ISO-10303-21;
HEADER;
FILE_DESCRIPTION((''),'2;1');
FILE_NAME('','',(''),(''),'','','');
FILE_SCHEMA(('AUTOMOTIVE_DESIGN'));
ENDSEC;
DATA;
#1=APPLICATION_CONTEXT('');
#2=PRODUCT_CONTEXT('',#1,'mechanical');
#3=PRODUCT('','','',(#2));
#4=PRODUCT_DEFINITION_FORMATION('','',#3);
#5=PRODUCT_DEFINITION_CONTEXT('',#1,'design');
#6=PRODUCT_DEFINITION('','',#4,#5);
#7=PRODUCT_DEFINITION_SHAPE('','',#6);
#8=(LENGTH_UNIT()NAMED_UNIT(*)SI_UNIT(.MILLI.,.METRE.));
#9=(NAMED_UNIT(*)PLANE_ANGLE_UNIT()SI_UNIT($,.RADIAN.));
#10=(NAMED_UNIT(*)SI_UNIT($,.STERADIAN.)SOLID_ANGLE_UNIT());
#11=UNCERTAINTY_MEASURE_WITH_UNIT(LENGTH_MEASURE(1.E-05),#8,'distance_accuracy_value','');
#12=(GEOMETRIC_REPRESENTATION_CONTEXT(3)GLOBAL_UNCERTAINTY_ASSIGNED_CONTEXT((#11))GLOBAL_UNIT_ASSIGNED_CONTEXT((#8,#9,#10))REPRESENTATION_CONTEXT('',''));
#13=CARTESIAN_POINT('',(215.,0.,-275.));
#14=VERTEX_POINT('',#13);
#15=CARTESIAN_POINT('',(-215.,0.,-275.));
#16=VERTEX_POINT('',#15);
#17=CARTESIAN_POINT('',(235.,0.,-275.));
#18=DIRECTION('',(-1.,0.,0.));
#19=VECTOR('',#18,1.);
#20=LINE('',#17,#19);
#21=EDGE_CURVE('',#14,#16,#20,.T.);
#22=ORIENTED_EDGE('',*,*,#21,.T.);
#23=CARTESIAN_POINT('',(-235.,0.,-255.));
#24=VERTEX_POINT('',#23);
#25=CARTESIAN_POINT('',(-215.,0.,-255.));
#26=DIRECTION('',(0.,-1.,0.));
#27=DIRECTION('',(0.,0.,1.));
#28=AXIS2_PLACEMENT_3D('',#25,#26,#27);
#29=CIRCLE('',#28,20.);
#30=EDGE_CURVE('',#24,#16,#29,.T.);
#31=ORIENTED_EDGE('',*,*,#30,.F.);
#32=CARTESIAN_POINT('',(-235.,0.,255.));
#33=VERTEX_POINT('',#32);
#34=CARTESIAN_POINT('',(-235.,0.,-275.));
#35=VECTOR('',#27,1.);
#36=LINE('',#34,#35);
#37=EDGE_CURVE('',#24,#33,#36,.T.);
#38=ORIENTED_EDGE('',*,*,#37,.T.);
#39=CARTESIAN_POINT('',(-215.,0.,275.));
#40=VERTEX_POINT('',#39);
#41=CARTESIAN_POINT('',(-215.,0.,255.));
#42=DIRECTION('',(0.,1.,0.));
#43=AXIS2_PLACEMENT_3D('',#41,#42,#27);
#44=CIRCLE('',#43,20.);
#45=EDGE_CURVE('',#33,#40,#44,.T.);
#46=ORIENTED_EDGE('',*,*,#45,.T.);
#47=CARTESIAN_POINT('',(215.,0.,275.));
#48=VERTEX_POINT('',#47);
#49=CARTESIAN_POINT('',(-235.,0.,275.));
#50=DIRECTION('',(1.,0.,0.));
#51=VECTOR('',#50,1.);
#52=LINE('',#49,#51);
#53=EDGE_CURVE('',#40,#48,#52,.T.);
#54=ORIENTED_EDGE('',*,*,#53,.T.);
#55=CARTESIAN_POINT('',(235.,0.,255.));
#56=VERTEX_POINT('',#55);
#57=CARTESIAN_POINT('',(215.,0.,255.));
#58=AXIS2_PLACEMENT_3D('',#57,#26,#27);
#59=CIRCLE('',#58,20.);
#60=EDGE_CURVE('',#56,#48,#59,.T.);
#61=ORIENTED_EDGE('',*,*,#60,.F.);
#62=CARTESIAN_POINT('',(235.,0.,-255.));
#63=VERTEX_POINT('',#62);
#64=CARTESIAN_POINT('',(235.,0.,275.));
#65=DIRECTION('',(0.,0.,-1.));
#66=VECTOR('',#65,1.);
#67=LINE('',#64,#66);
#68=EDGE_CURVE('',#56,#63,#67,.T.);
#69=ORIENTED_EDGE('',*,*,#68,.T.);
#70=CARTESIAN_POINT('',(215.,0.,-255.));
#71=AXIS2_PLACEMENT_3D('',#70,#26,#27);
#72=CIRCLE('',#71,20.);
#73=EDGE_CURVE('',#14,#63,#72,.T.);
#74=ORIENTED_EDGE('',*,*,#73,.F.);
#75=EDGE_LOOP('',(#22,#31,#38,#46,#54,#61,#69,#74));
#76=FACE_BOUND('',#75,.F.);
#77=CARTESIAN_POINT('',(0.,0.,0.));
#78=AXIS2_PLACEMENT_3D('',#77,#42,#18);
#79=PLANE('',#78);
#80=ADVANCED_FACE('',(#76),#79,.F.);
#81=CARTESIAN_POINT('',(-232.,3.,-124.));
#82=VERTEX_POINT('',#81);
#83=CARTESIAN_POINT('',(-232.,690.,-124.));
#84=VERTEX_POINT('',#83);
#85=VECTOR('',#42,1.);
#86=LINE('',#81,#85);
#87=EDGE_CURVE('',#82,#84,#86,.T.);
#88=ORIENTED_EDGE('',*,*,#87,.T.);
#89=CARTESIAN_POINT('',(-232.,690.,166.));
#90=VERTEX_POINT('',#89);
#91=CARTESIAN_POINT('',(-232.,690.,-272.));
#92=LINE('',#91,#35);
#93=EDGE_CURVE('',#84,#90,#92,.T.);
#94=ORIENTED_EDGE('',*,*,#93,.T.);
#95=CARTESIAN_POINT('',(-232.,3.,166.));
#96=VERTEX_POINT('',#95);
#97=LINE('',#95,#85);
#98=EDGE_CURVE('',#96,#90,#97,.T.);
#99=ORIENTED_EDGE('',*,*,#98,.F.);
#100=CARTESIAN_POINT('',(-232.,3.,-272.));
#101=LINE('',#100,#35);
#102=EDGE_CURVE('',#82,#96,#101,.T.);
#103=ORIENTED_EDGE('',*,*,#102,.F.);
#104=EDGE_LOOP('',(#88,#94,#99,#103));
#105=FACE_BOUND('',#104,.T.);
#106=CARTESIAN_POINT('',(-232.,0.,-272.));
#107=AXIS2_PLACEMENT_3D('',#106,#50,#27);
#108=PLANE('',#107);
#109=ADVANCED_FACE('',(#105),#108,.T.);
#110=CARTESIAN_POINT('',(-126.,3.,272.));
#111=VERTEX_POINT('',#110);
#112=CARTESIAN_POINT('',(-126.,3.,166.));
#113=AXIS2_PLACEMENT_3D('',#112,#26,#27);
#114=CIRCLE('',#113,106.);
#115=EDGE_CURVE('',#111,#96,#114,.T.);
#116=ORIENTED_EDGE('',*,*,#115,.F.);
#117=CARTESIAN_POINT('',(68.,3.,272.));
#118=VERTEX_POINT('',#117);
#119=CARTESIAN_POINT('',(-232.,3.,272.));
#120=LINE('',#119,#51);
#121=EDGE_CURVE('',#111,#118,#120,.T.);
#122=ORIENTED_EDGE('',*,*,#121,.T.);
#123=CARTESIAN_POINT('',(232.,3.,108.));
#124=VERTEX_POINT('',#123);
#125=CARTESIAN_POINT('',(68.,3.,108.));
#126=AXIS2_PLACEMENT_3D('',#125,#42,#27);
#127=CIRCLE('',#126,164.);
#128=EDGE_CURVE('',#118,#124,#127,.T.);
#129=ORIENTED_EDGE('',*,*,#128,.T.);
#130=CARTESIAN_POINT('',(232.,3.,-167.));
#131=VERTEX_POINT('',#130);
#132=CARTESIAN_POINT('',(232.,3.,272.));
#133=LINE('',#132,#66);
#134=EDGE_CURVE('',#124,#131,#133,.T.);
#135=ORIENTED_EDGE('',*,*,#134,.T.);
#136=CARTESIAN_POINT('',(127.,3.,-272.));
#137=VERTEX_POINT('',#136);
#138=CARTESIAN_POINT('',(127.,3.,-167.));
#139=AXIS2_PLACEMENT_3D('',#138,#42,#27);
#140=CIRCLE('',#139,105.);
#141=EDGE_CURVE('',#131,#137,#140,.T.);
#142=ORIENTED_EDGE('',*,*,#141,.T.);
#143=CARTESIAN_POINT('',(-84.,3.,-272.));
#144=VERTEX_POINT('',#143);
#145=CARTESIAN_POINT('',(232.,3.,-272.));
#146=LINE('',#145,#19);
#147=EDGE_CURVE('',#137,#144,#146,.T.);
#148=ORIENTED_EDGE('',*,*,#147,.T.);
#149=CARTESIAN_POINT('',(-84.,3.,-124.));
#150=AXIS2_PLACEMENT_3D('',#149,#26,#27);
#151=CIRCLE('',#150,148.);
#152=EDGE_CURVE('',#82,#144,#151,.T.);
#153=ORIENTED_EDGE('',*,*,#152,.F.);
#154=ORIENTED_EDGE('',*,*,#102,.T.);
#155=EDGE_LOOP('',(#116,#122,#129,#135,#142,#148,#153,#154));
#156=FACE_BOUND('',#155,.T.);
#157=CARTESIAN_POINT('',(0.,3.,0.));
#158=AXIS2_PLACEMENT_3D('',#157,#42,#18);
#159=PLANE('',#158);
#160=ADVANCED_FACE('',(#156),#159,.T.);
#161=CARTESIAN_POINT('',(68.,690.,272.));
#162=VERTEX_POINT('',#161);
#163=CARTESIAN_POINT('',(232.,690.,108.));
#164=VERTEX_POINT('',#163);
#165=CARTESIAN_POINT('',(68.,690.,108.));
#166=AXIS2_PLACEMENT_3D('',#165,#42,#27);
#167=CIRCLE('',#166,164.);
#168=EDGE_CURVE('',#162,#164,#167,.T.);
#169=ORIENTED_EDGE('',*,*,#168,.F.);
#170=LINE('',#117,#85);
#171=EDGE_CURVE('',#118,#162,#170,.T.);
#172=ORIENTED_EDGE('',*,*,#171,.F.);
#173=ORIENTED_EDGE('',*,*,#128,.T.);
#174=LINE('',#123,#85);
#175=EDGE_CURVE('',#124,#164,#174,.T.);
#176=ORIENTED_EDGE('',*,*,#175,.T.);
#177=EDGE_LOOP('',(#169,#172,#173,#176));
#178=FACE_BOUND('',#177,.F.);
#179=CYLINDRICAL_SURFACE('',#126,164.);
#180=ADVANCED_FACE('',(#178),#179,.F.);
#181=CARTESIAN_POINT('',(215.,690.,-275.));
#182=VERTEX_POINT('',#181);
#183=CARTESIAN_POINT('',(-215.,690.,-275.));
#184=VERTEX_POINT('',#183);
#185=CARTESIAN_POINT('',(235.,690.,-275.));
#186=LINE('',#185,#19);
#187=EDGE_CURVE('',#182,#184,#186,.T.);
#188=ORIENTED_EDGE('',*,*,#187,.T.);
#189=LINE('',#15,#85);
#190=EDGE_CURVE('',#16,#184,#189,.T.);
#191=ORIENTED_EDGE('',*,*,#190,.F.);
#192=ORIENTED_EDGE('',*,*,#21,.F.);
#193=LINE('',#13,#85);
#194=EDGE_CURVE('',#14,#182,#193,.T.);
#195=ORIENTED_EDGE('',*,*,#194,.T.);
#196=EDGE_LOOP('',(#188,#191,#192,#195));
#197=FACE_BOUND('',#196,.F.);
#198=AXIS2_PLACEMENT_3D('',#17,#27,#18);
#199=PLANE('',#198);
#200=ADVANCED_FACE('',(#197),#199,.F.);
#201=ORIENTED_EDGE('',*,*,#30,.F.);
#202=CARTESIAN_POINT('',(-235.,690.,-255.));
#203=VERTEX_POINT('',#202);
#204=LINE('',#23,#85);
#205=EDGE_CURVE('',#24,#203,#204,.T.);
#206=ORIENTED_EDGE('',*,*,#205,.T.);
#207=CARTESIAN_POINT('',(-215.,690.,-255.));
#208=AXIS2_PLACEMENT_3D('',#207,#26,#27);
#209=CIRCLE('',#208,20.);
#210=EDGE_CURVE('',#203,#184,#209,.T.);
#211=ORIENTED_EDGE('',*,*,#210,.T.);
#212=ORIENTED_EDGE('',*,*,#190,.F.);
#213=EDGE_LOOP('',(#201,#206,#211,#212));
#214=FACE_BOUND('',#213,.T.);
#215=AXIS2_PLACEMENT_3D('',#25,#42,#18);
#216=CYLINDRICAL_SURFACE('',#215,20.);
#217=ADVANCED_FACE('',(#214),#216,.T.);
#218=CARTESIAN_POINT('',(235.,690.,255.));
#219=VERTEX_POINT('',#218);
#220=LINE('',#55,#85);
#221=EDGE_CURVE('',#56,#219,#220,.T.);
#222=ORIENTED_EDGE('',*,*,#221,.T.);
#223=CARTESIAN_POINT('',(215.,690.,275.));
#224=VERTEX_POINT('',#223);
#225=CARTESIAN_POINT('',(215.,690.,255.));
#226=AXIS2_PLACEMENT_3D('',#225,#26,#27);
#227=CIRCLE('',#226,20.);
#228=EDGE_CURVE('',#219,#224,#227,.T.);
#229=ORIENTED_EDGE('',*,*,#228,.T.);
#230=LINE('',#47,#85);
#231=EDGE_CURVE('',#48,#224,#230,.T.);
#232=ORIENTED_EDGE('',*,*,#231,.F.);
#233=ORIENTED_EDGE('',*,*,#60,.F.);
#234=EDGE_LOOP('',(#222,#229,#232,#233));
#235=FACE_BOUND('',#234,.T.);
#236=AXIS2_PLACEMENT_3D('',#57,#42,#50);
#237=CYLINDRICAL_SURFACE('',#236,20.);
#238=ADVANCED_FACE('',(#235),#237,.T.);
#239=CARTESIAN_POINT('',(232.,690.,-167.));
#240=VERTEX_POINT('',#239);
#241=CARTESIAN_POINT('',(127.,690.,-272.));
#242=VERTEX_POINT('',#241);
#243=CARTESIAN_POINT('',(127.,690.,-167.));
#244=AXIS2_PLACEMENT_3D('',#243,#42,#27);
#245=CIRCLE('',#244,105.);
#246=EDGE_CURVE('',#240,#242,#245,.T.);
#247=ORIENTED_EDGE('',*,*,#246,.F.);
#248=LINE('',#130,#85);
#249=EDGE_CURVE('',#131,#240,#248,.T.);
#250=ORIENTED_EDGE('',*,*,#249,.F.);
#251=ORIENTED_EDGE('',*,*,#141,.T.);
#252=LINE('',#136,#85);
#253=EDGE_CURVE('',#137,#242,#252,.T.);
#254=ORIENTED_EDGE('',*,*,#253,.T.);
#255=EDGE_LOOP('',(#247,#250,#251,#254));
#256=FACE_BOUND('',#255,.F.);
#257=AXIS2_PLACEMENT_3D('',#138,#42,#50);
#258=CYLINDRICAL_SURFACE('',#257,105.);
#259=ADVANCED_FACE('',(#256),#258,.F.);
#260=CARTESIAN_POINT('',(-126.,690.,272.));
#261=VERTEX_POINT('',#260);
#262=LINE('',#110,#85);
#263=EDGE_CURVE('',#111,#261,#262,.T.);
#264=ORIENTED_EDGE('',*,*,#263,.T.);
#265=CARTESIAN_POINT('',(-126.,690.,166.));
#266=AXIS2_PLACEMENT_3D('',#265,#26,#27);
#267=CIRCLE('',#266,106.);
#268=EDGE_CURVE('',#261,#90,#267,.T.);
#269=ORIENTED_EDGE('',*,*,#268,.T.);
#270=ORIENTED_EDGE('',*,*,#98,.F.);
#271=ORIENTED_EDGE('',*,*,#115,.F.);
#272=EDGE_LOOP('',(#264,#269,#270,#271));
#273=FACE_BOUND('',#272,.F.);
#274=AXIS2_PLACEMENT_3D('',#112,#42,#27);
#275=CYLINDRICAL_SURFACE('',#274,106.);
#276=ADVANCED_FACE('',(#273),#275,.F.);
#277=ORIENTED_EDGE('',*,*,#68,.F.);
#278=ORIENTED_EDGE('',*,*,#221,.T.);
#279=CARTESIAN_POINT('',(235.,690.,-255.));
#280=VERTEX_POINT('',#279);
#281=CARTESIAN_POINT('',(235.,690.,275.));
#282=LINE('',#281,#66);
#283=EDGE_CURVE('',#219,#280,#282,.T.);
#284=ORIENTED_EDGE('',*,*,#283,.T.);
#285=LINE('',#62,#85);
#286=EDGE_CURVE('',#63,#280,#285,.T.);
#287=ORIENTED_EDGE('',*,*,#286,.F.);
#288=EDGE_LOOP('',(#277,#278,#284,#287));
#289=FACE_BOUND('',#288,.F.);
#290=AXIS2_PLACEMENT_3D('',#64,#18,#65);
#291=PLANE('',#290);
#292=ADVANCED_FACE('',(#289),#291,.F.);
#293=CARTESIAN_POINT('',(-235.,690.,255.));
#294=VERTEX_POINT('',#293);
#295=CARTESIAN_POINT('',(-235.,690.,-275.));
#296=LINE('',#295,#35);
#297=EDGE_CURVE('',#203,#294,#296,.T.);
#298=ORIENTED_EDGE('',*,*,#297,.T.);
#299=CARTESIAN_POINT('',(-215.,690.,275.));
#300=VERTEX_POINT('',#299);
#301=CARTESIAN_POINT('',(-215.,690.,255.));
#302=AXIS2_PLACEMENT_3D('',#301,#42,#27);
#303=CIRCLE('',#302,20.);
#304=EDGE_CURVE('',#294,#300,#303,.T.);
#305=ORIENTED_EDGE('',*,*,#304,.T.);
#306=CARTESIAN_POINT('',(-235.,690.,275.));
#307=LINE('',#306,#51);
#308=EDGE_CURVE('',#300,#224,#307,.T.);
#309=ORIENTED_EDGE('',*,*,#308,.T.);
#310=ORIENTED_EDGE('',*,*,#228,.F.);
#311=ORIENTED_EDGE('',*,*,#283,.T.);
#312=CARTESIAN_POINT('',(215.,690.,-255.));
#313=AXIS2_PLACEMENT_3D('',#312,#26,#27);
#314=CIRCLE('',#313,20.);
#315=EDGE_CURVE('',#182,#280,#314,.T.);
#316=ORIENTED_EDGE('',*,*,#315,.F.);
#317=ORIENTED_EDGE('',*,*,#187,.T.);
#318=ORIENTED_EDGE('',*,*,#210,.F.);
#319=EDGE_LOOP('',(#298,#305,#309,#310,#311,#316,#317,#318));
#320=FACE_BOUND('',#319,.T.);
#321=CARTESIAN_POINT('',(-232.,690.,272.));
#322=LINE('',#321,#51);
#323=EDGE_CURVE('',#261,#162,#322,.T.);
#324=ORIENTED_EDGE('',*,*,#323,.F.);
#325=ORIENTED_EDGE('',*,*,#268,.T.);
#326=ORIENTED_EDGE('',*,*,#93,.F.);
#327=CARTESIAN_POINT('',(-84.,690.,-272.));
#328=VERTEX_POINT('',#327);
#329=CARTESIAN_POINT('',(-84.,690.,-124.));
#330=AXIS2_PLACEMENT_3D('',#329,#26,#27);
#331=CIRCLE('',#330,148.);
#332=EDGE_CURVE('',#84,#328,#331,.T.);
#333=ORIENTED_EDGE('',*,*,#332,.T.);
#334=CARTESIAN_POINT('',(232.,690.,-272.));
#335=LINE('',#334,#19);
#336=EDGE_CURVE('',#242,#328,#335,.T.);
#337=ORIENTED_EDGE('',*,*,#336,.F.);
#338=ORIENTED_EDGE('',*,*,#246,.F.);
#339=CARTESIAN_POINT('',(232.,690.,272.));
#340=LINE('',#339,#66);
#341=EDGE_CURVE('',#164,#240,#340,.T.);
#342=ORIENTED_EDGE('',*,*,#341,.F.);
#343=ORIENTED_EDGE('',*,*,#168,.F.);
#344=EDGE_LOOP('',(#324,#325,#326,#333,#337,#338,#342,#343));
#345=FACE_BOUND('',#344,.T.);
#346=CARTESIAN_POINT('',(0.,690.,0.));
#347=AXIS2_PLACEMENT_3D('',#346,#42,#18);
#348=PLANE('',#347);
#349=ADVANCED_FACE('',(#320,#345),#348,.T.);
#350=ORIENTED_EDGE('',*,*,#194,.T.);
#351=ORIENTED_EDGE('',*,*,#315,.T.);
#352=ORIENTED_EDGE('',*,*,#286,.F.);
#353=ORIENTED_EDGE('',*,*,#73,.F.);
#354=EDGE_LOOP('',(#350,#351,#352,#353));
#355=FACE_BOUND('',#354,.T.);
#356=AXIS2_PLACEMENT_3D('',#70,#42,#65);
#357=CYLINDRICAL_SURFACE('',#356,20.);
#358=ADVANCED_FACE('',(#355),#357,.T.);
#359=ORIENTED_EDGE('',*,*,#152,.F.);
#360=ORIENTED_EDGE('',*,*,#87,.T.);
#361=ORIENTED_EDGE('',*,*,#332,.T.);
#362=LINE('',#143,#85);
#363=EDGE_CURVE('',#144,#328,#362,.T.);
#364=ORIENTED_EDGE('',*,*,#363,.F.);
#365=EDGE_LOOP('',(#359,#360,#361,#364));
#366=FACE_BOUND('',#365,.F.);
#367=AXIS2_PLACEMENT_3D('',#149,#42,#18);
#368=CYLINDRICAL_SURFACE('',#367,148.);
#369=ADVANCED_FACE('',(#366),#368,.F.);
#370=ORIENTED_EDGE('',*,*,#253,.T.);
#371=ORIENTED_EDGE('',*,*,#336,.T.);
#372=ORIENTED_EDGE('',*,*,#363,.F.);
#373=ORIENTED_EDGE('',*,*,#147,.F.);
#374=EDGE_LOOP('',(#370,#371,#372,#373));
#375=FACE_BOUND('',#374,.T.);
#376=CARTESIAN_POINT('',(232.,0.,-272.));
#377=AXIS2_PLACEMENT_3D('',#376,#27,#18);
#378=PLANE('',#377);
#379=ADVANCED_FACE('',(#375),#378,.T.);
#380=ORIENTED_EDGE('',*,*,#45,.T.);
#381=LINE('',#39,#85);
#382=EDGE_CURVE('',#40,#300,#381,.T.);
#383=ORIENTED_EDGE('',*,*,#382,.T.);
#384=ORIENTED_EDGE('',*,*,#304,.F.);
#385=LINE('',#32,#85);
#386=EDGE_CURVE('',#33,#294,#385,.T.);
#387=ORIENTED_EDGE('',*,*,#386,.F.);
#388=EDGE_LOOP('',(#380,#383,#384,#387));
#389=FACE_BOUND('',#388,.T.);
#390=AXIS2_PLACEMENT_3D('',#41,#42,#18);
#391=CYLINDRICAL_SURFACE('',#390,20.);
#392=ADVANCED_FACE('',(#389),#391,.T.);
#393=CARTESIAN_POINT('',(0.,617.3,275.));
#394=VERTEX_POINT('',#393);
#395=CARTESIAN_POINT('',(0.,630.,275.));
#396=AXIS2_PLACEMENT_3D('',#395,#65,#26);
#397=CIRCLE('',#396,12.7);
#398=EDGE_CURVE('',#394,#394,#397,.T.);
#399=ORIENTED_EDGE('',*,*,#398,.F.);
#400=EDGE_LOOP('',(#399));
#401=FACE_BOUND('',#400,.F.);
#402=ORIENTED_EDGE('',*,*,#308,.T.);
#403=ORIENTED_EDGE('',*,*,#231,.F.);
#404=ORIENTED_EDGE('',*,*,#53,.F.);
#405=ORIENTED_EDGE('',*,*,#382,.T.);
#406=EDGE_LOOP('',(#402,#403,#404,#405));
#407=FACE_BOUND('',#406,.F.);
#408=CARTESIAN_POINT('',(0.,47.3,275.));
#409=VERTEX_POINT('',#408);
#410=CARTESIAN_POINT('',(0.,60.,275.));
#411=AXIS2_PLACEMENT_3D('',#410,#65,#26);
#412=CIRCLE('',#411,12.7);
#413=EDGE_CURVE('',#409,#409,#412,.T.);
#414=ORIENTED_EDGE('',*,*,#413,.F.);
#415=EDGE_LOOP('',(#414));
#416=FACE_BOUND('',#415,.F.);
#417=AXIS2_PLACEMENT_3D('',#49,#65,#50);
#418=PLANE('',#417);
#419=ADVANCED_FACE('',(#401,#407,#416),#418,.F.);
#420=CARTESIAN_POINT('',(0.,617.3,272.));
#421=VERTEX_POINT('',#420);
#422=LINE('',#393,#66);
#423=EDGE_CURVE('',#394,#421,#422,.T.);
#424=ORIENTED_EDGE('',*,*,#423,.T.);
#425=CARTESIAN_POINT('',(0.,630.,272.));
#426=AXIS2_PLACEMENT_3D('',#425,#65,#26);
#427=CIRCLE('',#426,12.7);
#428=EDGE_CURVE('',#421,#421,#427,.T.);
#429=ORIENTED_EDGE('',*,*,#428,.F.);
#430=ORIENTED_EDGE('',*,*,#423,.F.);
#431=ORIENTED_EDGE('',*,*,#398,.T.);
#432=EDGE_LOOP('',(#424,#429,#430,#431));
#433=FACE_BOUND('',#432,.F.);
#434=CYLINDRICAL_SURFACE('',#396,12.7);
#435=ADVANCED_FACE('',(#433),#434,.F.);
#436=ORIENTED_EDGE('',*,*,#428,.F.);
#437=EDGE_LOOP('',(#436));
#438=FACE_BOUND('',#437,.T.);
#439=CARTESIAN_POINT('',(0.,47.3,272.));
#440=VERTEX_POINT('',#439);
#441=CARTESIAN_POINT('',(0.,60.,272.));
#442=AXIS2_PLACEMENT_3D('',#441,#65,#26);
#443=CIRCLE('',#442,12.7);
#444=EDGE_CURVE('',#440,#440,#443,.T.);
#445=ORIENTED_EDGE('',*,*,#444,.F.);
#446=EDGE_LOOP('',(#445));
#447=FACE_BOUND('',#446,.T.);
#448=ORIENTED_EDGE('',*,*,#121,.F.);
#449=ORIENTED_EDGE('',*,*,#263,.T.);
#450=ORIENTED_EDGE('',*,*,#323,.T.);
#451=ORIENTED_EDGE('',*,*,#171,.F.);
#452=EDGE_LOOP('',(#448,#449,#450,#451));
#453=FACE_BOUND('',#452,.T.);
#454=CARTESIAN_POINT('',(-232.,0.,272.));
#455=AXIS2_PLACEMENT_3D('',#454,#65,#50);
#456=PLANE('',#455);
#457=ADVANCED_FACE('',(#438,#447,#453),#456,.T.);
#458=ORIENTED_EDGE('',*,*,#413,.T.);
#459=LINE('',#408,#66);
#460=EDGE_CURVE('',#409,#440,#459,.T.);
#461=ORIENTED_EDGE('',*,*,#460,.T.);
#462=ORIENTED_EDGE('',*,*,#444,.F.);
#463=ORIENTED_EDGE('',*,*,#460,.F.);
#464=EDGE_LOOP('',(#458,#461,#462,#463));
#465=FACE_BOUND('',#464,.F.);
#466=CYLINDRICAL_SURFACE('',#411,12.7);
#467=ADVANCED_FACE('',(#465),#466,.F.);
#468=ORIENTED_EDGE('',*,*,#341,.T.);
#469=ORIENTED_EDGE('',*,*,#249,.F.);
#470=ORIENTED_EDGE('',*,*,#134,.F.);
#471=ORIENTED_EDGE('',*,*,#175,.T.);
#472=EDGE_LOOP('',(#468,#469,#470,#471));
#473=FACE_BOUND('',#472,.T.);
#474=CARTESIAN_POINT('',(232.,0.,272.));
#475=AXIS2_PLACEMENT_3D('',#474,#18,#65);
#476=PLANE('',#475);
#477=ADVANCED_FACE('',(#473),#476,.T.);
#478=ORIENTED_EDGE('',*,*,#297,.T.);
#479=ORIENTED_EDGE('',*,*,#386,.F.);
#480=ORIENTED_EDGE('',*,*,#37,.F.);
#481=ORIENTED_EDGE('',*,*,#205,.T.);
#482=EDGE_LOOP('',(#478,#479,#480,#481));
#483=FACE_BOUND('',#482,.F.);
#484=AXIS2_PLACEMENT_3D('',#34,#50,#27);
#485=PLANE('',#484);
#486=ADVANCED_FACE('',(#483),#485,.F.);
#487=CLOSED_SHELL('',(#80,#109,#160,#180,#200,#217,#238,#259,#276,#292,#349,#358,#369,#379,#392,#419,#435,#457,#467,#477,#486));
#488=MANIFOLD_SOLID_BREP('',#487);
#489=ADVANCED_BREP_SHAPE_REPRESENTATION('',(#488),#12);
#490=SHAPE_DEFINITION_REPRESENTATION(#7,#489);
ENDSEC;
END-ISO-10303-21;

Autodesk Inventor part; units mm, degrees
ref_plane "YZ Plane" through (0, 0, 0) normal (1, 0, 0) x (0, 1, 0)
ref_plane "XZ Plane" through (0, 0, 0) normal (0, 1, 0) x (-1, 0, 0)
ref_plane "XY Plane" through (0, 0, 0) normal (0, 0, 1) x (1, 0, 0)
sketch "Sketch1" plane through (0, 0, 0) normal (0, 1, 0) x (-1, 0, 0)
  line L0 (235, 275) -> (-235, 275)
  line L1 (-235, 275) -> (-235, -275)
  line L2 (-235, -275) -> (235, -275)
  line L3 (235, -275) -> (235, 275)
  line L4 (235, 275) -> (-235, -275) construction
  line L5 (-235, 275) -> (235, -275) construction
  line L6 (232, 272) -> (-232, 272)
  line L7 (-232, 272) -> (-232, -272)
  line L8 (-232, -272) -> (232, -272)
  line L9 (232, -272) -> (232, 272)
  point P0 (0, 0)
  dimension "d0" = 470
  dimension "d1" = 550
  dimension "d2" = 3
extrude "Extrusion1" add sketch "Sketch1" along normal blind 3 contours L9 L8 L7 L6
extrude "Extrusion2" add sketch "Sketch1" along normal blind 690
fillet "Fillet1" radius 106 1 edges at (-232, 346.5, 272)
fillet "Fillet2" radius 148 1 edges at (-232, 346.5, -272)
fillet "Fillet3" radius 164 1 edges at (232, 346.5, 272)
fillet "Fillet4" radius 105 1 edges at (232, 346.5, -272)
fillet "Fillet5" radius 20 4 edges at (235, 345, 275) (235, 345, -275) (-235, 345, 275) (-235, 345, -275)
sketch "Sketch2" plane through (-215, 0, 275) normal (0, 0, 1) x (1, 0, 0)
  line L0 (0, 0) -> (0, 690) projected
  line L1 (0, 690) -> (430, 690) projected
  line L2 (0, 0) -> (430, 0) projected
  point P0 (215, 0)
  point P1 (215, 630)
  point P2 (215, 60)
  dimension "d19" = 215
  dimension "d20" = 60
  dimension "d21" = 215
  dimension "d22" = 60
hole "Hole1" at (0, 630, 275) at (0, 60, 275) direction (0, 0, -1) diameter 25.4 depth 26 tip angle 118
properties part number "Storage_tank"
